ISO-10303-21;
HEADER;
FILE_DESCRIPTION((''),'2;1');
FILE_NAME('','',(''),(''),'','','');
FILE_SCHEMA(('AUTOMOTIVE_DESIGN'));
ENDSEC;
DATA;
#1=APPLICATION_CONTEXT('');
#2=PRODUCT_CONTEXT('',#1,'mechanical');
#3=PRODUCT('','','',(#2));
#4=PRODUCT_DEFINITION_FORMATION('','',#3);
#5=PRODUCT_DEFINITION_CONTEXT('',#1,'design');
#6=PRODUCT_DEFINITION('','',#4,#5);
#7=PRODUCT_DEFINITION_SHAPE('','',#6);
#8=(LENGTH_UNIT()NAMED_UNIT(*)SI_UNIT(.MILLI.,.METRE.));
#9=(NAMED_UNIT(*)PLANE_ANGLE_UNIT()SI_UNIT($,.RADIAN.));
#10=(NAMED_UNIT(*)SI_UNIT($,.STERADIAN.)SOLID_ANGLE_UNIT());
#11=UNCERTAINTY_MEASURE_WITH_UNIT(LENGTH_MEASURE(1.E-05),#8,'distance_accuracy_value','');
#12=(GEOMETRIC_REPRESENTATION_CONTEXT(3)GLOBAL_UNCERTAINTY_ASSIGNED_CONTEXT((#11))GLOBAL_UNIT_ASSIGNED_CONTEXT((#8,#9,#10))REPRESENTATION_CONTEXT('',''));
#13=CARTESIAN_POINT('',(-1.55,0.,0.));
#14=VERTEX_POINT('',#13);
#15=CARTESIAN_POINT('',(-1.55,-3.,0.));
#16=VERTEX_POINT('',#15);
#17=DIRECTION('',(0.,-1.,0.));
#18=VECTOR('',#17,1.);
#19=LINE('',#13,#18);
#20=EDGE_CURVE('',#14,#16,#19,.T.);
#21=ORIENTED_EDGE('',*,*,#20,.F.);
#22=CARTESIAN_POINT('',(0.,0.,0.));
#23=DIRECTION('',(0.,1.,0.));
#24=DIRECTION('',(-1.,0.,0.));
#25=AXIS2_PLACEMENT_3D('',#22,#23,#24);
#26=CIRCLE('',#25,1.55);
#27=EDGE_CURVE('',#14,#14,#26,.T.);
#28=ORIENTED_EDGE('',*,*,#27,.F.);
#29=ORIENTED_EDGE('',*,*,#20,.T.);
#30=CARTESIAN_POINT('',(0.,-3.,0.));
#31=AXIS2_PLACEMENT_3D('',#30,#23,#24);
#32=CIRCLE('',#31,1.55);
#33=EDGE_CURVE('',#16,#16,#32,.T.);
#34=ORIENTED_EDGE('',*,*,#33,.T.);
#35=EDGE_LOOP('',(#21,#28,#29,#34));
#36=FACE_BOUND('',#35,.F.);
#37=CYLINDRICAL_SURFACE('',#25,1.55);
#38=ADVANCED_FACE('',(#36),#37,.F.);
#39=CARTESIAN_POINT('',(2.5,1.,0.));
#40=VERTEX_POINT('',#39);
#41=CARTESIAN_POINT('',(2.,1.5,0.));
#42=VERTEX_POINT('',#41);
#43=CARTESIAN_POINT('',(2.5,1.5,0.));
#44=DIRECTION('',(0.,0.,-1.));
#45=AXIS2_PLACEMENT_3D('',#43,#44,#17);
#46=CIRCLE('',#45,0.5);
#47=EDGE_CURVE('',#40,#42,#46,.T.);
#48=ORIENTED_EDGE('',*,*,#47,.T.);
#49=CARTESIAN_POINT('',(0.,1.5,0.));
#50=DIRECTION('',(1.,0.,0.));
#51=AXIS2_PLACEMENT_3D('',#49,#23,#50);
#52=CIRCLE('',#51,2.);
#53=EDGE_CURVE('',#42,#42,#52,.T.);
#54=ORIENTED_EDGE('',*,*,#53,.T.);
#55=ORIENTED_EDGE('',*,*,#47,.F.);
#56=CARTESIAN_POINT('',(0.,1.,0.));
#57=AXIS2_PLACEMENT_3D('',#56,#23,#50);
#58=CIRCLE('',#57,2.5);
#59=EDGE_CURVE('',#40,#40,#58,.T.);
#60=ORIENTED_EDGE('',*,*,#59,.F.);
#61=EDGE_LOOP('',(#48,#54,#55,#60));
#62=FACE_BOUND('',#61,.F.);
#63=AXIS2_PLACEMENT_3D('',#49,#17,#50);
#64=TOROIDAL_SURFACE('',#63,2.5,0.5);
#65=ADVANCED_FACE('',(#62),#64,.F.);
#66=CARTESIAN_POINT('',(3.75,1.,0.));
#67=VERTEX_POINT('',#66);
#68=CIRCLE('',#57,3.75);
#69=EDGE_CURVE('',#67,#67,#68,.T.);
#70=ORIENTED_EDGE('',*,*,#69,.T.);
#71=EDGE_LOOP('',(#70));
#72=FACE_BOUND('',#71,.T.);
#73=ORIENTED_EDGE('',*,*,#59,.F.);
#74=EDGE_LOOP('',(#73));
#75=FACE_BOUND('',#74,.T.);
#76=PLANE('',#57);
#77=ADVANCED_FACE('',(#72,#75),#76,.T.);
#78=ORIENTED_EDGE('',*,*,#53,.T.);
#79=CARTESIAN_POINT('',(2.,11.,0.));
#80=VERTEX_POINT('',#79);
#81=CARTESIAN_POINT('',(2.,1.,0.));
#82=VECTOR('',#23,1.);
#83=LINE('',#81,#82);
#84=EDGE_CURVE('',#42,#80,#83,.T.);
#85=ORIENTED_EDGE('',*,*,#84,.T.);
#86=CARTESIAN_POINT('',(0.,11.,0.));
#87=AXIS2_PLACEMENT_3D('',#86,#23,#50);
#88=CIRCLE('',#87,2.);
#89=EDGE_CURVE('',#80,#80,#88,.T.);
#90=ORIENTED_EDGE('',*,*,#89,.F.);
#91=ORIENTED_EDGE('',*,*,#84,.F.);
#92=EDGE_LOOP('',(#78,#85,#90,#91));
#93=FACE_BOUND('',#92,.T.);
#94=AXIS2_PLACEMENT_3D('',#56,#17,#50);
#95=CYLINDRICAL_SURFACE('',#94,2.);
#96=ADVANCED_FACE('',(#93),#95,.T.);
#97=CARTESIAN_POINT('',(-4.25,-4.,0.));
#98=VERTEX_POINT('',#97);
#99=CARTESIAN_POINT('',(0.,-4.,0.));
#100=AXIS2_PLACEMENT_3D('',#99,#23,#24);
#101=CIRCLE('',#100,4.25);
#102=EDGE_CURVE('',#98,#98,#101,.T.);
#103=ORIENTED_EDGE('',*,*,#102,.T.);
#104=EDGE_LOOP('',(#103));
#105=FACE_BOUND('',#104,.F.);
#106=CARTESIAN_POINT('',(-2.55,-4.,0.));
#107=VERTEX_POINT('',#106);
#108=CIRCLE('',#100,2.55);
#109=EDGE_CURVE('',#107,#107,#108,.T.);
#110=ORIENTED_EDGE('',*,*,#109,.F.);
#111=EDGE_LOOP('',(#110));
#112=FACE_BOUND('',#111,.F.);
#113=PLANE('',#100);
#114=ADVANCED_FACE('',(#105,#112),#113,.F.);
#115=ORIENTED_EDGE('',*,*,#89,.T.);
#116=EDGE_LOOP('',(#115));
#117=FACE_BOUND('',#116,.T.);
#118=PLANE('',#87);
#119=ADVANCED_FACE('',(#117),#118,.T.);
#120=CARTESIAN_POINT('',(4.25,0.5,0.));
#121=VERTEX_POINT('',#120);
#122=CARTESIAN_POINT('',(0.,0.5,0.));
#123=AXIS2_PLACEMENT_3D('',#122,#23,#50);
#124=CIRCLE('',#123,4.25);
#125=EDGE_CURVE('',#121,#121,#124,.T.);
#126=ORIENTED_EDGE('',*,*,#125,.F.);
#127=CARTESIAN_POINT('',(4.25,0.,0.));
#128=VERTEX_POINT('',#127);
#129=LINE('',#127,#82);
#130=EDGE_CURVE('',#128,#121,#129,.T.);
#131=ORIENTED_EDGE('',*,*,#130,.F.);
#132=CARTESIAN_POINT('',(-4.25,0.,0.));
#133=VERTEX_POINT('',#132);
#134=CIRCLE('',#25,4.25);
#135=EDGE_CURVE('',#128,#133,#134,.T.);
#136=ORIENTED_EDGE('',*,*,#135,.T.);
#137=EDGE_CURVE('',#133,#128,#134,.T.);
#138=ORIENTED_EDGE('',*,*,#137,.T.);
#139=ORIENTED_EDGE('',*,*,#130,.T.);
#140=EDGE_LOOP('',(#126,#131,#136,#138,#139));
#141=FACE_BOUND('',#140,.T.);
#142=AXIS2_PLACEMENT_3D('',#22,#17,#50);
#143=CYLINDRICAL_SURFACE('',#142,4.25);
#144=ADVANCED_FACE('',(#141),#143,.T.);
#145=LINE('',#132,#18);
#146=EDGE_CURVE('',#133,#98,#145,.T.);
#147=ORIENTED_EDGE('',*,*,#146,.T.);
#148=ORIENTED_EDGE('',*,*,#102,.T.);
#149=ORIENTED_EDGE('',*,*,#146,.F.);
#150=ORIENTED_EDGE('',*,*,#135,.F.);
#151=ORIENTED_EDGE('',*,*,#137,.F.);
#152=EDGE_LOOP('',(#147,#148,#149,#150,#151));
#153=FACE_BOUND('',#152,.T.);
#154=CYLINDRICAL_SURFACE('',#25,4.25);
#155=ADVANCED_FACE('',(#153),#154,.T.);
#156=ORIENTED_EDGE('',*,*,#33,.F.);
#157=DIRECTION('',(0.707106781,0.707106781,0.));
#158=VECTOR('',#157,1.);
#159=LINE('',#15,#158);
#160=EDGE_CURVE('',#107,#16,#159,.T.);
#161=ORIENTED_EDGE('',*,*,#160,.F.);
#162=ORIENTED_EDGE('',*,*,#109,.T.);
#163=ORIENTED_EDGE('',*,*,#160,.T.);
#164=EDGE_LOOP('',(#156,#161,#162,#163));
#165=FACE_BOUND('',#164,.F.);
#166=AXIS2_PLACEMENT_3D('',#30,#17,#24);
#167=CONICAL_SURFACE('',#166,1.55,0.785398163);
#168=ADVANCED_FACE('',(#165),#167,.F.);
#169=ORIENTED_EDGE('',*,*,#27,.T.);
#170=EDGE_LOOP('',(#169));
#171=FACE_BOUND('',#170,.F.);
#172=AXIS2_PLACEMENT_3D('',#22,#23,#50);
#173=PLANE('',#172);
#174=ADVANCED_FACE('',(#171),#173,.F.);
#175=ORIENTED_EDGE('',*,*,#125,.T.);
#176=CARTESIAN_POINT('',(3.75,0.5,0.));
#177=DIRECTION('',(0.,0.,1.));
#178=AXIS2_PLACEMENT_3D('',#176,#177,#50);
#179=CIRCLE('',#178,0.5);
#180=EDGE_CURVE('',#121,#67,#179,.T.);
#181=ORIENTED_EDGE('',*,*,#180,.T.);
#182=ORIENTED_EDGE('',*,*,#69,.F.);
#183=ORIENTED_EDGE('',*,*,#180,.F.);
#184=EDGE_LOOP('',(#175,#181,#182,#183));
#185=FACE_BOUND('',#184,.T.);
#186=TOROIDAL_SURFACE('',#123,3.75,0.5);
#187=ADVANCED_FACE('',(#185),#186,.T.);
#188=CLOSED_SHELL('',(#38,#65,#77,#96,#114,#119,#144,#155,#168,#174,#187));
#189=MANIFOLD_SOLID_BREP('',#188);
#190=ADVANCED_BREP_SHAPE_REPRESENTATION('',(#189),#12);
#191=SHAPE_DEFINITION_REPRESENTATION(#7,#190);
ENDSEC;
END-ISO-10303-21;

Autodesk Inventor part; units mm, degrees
ref_plane "YZ Plane" through (0, 0, 0) normal (1, 0, 0) x (0, 1, 0)
ref_plane "XZ Plane" through (0, 0, 0) normal (0, 1, 0) x (-1, 0, 0)
ref_plane "XY Plane" through (0, 0, 0) normal (0, 0, 1) x (1, 0, 0)
sketch "Sketch1" plane through (0, 0, 0) normal (0, 1, 0) x (-1, 0, 0)
  circle A0 centre (0, 0) radius 1.55
  circle A1 centre (0, 0) radius 4.25
  dimension "d0" = 3.1
  dimension "d1" = 8.5
extrude "Extrusion1" add sketch "Sketch1" against normal blind 4
sketch "Sketch2" plane through (0, 0, 0) normal (0, 1, 0) x (1, 0, 0)
  circle A0 centre (0, 0) radius 4.25 projected
extrude "Extrusion2" add sketch "Sketch2" along normal blind 1
sketch "Sketch3" plane through (0, 1, 0) normal (0, 1, 0) x (1, 0, 0)
  circle A0 centre (0, 0) radius 2
  dimension "d6" = 4
extrude "Extrusion3" add sketch "Sketch3" along normal blind 10
fillet "Fillet1" radius 0.5 2 edges at (-2, 1, 0) (-4.25, 1, 0)
chamfer "Chamfer1" distance 1 angle 45 1 edges at (1.55, -4, 0)
properties part number "przycisk"
